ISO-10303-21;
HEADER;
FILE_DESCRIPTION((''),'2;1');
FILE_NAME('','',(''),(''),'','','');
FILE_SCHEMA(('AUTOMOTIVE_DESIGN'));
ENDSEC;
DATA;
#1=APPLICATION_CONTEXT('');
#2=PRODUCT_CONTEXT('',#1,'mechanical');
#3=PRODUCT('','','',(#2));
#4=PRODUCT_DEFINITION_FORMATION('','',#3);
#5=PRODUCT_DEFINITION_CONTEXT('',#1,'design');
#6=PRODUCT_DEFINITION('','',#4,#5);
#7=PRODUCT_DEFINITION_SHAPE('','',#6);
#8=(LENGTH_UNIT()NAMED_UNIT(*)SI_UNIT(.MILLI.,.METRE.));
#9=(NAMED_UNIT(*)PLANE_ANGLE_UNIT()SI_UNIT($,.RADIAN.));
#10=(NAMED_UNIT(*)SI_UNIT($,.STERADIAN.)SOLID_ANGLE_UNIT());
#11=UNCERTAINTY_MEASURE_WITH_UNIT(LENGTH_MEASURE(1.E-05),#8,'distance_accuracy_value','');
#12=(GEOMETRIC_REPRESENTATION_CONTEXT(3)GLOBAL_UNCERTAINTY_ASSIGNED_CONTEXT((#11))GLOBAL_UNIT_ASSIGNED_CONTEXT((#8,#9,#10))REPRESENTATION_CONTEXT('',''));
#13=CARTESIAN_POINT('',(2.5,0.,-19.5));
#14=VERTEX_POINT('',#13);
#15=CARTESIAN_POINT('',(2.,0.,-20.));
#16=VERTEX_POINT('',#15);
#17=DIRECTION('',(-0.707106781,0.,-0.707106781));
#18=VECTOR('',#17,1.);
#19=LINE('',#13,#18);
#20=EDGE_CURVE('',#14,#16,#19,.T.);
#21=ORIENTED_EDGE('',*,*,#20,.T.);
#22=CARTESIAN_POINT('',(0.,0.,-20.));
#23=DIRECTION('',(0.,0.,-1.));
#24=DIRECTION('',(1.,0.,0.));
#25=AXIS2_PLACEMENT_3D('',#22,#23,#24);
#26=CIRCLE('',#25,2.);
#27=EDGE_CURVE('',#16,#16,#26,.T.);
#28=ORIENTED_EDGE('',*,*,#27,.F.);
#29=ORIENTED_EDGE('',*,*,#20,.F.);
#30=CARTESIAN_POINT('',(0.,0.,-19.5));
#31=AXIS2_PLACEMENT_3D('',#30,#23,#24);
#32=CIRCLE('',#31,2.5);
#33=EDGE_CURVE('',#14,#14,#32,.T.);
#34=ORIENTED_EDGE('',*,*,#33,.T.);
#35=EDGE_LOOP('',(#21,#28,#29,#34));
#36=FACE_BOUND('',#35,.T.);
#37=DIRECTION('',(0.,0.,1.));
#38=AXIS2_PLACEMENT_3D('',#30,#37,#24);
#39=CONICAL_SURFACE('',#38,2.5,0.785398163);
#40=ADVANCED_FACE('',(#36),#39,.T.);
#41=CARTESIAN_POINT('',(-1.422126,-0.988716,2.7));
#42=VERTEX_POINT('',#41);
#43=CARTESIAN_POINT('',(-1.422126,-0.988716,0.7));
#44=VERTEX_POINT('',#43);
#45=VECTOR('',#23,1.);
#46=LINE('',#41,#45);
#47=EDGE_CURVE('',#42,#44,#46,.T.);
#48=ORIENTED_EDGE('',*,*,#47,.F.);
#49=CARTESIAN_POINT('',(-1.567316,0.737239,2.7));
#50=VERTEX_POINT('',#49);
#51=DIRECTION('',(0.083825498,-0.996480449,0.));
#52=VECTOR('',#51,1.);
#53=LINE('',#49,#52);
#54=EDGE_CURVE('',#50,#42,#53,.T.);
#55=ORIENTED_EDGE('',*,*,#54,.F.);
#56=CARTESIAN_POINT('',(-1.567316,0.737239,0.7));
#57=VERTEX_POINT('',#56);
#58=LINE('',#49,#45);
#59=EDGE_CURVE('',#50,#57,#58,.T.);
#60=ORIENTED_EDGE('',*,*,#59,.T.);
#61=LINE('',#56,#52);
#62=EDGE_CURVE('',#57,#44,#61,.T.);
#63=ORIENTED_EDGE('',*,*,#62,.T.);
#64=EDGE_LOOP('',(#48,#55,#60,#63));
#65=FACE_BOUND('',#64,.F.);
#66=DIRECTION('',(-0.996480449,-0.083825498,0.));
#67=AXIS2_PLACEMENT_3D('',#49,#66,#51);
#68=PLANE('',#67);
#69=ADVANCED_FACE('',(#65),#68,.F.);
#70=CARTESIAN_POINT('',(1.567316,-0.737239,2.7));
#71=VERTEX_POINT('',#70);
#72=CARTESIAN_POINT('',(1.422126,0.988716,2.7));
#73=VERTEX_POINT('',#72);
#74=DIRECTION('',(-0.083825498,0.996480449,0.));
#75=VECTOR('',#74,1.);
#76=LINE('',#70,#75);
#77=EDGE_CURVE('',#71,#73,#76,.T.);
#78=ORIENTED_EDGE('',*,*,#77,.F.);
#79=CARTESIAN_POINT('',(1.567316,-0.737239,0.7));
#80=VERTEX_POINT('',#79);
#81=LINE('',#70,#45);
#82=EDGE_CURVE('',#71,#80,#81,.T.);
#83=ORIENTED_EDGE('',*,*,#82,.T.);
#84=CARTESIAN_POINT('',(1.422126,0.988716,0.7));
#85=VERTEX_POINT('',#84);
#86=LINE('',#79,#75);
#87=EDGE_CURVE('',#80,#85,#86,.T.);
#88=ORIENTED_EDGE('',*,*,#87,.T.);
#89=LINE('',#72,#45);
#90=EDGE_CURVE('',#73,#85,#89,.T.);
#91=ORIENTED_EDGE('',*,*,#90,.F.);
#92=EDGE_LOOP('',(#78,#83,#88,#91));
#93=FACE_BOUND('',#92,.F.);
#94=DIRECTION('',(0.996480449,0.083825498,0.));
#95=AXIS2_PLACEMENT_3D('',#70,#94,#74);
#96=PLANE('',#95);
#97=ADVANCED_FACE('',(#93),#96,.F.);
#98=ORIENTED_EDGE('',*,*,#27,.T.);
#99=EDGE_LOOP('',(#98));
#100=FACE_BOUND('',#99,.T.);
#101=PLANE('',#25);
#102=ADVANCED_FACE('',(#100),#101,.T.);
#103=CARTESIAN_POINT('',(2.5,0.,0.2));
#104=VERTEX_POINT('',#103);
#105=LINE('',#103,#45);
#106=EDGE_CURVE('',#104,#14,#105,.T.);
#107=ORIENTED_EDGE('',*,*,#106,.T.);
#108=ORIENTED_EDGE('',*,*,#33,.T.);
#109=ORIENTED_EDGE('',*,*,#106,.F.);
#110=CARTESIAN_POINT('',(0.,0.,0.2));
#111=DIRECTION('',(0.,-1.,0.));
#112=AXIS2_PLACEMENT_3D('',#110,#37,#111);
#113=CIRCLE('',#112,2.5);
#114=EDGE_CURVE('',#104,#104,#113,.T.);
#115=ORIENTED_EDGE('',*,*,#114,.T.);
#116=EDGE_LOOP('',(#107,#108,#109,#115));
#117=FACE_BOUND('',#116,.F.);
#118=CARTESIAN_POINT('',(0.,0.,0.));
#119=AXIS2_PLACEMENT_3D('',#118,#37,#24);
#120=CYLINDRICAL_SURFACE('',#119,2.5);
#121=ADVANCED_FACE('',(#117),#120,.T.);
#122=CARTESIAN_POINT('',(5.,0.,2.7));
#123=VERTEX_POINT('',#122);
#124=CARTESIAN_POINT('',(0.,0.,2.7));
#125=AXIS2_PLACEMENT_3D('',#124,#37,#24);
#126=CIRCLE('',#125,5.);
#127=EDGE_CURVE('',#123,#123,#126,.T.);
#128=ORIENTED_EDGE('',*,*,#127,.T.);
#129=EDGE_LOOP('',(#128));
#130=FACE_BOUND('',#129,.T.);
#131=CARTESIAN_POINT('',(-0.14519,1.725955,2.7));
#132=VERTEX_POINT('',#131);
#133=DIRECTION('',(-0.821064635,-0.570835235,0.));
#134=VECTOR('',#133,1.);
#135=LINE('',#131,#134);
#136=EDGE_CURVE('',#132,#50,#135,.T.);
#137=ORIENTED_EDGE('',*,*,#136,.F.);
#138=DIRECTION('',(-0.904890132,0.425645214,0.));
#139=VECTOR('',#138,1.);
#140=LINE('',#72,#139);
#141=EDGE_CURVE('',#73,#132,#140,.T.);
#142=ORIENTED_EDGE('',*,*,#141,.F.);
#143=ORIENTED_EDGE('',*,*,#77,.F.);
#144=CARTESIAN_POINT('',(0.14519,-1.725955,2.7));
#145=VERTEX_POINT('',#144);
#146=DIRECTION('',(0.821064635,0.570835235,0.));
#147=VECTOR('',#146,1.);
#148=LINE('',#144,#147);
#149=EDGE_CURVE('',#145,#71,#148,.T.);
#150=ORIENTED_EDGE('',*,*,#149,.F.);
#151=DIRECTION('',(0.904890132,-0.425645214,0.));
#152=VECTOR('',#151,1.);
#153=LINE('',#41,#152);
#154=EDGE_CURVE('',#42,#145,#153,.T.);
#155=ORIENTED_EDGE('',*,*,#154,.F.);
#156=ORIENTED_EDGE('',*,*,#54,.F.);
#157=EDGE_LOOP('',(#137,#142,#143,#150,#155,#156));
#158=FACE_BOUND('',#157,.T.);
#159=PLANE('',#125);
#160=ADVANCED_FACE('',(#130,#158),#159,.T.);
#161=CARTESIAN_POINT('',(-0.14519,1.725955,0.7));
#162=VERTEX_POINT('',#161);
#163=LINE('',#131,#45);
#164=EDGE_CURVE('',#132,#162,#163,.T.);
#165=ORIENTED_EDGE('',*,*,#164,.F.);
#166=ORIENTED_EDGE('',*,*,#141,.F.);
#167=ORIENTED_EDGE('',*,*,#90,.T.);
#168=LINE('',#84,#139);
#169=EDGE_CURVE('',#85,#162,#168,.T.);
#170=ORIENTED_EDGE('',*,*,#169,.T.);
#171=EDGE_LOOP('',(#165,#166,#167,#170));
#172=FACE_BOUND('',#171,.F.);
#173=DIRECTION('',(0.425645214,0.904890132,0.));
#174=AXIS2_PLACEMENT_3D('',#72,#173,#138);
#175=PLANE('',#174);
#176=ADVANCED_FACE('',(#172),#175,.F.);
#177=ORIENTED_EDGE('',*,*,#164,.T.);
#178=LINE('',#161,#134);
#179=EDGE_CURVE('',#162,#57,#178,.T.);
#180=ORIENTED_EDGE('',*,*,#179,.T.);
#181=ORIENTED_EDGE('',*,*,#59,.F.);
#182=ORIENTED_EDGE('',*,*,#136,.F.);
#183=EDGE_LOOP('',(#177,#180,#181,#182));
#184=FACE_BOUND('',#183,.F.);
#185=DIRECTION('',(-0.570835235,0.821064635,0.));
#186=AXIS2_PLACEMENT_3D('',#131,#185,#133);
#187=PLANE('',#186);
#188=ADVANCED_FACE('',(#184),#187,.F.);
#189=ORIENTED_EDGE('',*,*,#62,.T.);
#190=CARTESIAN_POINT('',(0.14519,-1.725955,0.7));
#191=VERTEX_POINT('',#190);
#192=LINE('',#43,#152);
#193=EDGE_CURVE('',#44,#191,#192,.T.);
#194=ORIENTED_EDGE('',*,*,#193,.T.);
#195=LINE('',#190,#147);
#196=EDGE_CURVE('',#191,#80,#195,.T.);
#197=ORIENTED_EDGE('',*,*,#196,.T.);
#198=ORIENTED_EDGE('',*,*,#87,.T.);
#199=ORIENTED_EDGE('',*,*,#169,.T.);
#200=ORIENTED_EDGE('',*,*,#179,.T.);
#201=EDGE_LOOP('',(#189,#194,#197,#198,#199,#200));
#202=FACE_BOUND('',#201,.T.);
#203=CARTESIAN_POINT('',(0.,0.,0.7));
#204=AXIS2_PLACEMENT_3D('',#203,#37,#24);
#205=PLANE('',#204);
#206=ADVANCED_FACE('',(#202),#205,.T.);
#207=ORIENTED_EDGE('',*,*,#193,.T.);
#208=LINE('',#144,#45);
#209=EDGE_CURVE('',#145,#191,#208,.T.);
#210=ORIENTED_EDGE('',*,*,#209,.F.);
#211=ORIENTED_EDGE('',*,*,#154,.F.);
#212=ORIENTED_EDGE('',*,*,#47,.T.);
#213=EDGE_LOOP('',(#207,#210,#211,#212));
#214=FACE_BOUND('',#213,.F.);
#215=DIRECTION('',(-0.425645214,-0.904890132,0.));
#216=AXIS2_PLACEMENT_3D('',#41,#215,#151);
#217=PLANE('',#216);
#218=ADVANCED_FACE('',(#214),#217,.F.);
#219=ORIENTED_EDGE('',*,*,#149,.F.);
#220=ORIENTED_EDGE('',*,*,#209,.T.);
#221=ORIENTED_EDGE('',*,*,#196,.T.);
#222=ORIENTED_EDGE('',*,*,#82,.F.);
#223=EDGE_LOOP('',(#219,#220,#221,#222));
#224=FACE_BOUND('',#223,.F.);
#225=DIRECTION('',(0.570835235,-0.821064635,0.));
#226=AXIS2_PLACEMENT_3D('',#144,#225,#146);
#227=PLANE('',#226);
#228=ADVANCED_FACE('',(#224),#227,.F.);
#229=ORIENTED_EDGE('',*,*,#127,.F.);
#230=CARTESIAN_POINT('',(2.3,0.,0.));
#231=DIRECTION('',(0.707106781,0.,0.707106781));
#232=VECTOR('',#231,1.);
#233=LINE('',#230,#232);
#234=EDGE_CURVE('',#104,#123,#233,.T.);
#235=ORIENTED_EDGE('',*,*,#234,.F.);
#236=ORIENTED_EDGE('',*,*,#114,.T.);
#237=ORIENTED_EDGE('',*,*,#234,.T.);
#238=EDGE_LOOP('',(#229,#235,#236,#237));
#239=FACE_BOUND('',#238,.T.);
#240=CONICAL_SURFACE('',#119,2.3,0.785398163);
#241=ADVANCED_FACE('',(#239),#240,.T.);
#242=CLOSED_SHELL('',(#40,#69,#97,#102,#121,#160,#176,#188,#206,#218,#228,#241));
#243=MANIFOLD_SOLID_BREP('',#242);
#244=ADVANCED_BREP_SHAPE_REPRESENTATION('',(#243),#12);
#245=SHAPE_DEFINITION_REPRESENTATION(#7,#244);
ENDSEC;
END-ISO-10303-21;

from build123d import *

# Parameters (mm, degrees)
F0_R        = 5
F1_DEPTH    = 2.7
F4_DEPTH    = 2
F2_R        = 2.5
F5_DEPTH    = 20
F6_SIZE     = 0.5
F7_S5_R     = 2.5
F7_T6_DEPTH = 9


# Not quite as in the source:
# - a fillet or chamfer that OpenCascade refuses, or shapes differently, is made with other operations: its cross-section is extruded or revolved along the edge and cut away or added
# - a feature names something its author has since deleted; it is built from what else it names


with BuildPart() as f1:
    # F0 (on Top) → F1 (new body)
    with BuildSketch(Plane.XY):
        Circle(F0_R)
    extrude(amount=F1_DEPTH)

    # F3 (on face) → F4 (cut)
    with BuildSketch(Plane.XY.offset(2.7)):
        Polygon((1.4221256636, 0.98871563), (-0.1451900209, 1.725954767), (-1.5673156845, 0.737239137), (-1.4221256636, -0.98871563), (0.1451900209, -1.725954767), (1.5673156845, -0.737239137), align=None)
    extrude(amount=-F4_DEPTH, mode=Mode.SUBTRACT)

    # F2 (on face) → F5 (join)
    with BuildSketch(Plane(origin=(0, 0, 0), x_dir=(1, 0, 0), z_dir=(0, 0, -1))):
        Circle(F2_R)
    extrude(amount=F5_DEPTH)

    # F6
    f6_edges = [f1.edges().sort_by_distance(p)[0] for p in [
        (-2.5, 0, -20),
    ]]
    chamfer(f6_edges, length=F6_SIZE)

    # F7: chamfer of 2.7 on 1 edges, made by hand


with BuildPart() as f7_tool2:
    # F7_s3 → F7_t4 (revolve)
    with BuildSketch(Plane.XZ):
        Polygon((2.3, 0), (5, 2.7), (5, 0), align=None)
    revolve(axis=Axis((0, 0, 0), (0, 0, 1)))

    # F7_s5 → F7_t6 (cut, symmetric)
    with BuildSketch(Plane.XY.offset(1.4)):
        Circle(F7_S5_R)
    extrude(amount=F7_T6_DEPTH, both=True, mode=Mode.SUBTRACT)


with BuildPart() as f1_1:
    add(f1.part)

    # F7_t1: cut F7_tool2
    add(f7_tool2.part, mode=Mode.SUBTRACT)


solid = f1_1.part
